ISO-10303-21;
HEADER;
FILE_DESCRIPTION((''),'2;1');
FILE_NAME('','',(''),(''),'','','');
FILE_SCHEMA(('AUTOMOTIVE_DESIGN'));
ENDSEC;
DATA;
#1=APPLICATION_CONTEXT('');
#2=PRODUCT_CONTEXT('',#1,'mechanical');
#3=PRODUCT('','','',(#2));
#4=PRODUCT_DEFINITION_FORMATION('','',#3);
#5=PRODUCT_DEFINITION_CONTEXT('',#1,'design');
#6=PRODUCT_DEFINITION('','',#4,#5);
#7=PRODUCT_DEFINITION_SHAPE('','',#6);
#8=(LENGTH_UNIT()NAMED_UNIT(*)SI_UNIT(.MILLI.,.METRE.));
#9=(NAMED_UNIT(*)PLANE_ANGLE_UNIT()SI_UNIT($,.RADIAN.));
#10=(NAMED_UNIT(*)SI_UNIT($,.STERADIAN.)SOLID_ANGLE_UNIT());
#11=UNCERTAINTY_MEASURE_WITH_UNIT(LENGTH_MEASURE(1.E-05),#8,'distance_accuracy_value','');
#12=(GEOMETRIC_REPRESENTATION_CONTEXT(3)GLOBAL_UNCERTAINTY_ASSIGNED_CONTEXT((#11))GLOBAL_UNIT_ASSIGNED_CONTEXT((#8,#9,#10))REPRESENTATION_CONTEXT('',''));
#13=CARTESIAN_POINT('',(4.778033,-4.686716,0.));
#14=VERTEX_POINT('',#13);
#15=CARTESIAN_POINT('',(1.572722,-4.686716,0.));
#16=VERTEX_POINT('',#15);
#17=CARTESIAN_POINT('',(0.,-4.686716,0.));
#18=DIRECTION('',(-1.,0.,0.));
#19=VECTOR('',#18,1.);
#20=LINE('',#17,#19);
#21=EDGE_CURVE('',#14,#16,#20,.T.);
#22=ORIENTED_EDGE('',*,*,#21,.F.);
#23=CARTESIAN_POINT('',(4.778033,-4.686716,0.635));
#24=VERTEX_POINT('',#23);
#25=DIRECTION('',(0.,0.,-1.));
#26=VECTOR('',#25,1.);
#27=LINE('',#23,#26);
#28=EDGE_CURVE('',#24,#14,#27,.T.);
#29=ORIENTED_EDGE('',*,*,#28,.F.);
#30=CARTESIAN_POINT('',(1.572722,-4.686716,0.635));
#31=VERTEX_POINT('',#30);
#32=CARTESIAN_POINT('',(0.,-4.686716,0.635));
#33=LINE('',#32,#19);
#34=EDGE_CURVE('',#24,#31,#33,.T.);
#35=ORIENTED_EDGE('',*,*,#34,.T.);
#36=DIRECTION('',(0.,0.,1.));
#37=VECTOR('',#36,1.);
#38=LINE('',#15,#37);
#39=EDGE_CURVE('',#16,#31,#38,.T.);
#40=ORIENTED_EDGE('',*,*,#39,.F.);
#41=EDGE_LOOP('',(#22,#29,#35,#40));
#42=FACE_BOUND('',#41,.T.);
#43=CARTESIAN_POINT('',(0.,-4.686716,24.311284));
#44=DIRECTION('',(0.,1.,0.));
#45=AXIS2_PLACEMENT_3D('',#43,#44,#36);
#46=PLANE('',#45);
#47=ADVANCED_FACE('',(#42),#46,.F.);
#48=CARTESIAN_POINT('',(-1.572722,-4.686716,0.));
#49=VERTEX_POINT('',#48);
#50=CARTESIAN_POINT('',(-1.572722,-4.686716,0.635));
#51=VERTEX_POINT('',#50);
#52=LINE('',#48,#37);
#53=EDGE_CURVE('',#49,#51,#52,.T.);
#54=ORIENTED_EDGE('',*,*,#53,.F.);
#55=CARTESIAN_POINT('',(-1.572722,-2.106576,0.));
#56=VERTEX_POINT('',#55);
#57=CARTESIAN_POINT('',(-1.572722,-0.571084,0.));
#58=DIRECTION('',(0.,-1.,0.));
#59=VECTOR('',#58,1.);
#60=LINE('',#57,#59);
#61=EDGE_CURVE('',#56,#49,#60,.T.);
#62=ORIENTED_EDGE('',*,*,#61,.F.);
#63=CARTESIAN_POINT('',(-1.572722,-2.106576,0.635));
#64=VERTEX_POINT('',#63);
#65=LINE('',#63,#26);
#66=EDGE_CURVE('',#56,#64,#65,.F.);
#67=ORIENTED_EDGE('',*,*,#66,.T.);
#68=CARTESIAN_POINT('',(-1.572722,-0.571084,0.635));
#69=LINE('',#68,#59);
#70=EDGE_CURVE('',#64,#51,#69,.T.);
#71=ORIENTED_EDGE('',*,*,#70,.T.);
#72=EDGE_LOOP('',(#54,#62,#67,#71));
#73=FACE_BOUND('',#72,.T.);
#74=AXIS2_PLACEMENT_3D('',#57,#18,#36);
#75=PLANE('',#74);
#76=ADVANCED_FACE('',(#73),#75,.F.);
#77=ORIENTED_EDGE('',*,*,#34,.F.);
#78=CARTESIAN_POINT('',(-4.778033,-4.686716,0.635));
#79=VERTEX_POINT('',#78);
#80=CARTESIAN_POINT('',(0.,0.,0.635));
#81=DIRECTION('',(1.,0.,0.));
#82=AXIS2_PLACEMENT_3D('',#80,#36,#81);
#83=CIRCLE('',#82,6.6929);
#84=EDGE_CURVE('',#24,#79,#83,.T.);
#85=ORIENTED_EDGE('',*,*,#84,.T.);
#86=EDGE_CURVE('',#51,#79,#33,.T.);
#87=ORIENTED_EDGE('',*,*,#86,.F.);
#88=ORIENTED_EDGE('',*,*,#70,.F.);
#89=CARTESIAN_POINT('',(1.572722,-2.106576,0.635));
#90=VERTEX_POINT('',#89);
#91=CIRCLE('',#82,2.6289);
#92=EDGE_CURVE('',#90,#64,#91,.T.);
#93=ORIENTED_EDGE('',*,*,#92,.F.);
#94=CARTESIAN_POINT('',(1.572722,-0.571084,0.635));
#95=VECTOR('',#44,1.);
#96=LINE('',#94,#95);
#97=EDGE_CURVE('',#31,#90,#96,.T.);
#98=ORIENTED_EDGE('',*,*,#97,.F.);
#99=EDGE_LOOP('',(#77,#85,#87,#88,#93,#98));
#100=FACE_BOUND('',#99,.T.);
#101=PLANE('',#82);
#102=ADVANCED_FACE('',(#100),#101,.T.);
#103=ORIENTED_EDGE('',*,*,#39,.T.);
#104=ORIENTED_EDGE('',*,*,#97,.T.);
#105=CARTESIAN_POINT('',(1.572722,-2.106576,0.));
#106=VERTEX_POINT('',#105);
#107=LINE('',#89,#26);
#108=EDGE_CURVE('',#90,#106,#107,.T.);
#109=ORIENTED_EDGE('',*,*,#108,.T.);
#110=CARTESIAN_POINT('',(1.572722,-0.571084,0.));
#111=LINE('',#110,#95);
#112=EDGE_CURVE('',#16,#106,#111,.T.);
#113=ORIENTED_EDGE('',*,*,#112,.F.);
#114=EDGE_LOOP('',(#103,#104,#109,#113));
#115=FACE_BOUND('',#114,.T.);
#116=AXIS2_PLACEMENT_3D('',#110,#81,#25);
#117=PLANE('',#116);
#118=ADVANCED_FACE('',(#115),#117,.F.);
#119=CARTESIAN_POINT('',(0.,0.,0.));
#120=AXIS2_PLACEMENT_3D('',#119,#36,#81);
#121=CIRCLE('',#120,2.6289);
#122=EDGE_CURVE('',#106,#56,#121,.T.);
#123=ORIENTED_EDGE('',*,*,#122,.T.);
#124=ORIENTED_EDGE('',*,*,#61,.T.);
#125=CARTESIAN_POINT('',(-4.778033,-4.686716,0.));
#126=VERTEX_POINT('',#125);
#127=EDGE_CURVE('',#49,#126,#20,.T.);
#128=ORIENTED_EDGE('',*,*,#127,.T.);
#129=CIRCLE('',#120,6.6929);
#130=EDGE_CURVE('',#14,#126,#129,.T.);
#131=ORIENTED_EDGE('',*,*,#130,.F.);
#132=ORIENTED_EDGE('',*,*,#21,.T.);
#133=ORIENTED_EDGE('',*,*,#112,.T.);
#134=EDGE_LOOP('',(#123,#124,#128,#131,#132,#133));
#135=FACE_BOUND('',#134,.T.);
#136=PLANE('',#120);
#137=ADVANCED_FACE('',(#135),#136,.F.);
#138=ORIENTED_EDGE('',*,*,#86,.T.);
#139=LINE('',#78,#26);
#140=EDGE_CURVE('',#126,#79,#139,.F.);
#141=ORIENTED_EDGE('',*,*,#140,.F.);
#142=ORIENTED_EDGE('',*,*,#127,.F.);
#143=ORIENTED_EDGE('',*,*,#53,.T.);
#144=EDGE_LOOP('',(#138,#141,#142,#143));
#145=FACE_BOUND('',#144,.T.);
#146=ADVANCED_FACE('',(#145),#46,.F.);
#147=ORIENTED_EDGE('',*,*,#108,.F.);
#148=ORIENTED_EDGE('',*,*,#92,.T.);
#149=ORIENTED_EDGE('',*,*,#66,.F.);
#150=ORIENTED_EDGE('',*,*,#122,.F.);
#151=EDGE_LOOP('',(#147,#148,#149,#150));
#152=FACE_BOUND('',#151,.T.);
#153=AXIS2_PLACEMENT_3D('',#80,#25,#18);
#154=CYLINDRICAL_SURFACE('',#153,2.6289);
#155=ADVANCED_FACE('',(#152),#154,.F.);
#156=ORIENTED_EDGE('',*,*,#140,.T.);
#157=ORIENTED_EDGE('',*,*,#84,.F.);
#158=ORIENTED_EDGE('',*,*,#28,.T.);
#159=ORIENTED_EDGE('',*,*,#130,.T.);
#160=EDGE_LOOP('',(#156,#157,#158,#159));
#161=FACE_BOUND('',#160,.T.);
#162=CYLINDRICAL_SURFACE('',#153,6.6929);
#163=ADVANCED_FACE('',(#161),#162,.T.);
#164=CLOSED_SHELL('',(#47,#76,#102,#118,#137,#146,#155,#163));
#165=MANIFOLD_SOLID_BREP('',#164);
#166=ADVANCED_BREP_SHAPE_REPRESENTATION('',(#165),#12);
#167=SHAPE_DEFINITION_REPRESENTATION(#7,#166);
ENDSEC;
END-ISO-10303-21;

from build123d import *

# Parameters (mm, degrees)
SKETCH1_R      = 6.6929
SKETCH1_R_2    = 2.6289
EXTRUDE1_DEPTH = 0.635
EXTRUDE2_START = -0.635
EXTRUDE2_DEPTH = 0.635
SKETCH5_W      = 3.145443006
SKETCH5_H      = 4.115631968
EXTRUDE3_DEPTH = 0.635


# Read off the part's stored shape, not the designer's step: Extrude2
with BuildPart() as part:
    # Sketch1 → Extrude1 (new body)
    with BuildSketch(Plane.XY):
        Circle(SKETCH1_R)
        Circle(SKETCH1_R_2, mode=Mode.SUBTRACT)
    extrude(amount=EXTRUDE1_DEPTH)

    # Extrude2 outline → Extrude2 (cut)
    with BuildSketch(Plane.XY.offset(0.635).offset(EXTRUDE2_START)):
        with BuildLine():
            Line((4.778033454, -4.686715984), (-4.778033454, -4.686715984))
            ThreePointArc((-4.778033454, -4.686715984), (0, -6.6929), (4.778033454, -4.686715984))
        make_face()
    extrude(amount=EXTRUDE2_DEPTH, mode=Mode.SUBTRACT)

    # Sketch5 → Extrude3 (cut)
    with BuildSketch(Plane.XY.offset(0.635)):
        with Locations((0, -2.6289)):
            Rectangle(SKETCH5_W, SKETCH5_H)
    extrude(amount=-EXTRUDE3_DEPTH, mode=Mode.SUBTRACT)


solid = part.part
